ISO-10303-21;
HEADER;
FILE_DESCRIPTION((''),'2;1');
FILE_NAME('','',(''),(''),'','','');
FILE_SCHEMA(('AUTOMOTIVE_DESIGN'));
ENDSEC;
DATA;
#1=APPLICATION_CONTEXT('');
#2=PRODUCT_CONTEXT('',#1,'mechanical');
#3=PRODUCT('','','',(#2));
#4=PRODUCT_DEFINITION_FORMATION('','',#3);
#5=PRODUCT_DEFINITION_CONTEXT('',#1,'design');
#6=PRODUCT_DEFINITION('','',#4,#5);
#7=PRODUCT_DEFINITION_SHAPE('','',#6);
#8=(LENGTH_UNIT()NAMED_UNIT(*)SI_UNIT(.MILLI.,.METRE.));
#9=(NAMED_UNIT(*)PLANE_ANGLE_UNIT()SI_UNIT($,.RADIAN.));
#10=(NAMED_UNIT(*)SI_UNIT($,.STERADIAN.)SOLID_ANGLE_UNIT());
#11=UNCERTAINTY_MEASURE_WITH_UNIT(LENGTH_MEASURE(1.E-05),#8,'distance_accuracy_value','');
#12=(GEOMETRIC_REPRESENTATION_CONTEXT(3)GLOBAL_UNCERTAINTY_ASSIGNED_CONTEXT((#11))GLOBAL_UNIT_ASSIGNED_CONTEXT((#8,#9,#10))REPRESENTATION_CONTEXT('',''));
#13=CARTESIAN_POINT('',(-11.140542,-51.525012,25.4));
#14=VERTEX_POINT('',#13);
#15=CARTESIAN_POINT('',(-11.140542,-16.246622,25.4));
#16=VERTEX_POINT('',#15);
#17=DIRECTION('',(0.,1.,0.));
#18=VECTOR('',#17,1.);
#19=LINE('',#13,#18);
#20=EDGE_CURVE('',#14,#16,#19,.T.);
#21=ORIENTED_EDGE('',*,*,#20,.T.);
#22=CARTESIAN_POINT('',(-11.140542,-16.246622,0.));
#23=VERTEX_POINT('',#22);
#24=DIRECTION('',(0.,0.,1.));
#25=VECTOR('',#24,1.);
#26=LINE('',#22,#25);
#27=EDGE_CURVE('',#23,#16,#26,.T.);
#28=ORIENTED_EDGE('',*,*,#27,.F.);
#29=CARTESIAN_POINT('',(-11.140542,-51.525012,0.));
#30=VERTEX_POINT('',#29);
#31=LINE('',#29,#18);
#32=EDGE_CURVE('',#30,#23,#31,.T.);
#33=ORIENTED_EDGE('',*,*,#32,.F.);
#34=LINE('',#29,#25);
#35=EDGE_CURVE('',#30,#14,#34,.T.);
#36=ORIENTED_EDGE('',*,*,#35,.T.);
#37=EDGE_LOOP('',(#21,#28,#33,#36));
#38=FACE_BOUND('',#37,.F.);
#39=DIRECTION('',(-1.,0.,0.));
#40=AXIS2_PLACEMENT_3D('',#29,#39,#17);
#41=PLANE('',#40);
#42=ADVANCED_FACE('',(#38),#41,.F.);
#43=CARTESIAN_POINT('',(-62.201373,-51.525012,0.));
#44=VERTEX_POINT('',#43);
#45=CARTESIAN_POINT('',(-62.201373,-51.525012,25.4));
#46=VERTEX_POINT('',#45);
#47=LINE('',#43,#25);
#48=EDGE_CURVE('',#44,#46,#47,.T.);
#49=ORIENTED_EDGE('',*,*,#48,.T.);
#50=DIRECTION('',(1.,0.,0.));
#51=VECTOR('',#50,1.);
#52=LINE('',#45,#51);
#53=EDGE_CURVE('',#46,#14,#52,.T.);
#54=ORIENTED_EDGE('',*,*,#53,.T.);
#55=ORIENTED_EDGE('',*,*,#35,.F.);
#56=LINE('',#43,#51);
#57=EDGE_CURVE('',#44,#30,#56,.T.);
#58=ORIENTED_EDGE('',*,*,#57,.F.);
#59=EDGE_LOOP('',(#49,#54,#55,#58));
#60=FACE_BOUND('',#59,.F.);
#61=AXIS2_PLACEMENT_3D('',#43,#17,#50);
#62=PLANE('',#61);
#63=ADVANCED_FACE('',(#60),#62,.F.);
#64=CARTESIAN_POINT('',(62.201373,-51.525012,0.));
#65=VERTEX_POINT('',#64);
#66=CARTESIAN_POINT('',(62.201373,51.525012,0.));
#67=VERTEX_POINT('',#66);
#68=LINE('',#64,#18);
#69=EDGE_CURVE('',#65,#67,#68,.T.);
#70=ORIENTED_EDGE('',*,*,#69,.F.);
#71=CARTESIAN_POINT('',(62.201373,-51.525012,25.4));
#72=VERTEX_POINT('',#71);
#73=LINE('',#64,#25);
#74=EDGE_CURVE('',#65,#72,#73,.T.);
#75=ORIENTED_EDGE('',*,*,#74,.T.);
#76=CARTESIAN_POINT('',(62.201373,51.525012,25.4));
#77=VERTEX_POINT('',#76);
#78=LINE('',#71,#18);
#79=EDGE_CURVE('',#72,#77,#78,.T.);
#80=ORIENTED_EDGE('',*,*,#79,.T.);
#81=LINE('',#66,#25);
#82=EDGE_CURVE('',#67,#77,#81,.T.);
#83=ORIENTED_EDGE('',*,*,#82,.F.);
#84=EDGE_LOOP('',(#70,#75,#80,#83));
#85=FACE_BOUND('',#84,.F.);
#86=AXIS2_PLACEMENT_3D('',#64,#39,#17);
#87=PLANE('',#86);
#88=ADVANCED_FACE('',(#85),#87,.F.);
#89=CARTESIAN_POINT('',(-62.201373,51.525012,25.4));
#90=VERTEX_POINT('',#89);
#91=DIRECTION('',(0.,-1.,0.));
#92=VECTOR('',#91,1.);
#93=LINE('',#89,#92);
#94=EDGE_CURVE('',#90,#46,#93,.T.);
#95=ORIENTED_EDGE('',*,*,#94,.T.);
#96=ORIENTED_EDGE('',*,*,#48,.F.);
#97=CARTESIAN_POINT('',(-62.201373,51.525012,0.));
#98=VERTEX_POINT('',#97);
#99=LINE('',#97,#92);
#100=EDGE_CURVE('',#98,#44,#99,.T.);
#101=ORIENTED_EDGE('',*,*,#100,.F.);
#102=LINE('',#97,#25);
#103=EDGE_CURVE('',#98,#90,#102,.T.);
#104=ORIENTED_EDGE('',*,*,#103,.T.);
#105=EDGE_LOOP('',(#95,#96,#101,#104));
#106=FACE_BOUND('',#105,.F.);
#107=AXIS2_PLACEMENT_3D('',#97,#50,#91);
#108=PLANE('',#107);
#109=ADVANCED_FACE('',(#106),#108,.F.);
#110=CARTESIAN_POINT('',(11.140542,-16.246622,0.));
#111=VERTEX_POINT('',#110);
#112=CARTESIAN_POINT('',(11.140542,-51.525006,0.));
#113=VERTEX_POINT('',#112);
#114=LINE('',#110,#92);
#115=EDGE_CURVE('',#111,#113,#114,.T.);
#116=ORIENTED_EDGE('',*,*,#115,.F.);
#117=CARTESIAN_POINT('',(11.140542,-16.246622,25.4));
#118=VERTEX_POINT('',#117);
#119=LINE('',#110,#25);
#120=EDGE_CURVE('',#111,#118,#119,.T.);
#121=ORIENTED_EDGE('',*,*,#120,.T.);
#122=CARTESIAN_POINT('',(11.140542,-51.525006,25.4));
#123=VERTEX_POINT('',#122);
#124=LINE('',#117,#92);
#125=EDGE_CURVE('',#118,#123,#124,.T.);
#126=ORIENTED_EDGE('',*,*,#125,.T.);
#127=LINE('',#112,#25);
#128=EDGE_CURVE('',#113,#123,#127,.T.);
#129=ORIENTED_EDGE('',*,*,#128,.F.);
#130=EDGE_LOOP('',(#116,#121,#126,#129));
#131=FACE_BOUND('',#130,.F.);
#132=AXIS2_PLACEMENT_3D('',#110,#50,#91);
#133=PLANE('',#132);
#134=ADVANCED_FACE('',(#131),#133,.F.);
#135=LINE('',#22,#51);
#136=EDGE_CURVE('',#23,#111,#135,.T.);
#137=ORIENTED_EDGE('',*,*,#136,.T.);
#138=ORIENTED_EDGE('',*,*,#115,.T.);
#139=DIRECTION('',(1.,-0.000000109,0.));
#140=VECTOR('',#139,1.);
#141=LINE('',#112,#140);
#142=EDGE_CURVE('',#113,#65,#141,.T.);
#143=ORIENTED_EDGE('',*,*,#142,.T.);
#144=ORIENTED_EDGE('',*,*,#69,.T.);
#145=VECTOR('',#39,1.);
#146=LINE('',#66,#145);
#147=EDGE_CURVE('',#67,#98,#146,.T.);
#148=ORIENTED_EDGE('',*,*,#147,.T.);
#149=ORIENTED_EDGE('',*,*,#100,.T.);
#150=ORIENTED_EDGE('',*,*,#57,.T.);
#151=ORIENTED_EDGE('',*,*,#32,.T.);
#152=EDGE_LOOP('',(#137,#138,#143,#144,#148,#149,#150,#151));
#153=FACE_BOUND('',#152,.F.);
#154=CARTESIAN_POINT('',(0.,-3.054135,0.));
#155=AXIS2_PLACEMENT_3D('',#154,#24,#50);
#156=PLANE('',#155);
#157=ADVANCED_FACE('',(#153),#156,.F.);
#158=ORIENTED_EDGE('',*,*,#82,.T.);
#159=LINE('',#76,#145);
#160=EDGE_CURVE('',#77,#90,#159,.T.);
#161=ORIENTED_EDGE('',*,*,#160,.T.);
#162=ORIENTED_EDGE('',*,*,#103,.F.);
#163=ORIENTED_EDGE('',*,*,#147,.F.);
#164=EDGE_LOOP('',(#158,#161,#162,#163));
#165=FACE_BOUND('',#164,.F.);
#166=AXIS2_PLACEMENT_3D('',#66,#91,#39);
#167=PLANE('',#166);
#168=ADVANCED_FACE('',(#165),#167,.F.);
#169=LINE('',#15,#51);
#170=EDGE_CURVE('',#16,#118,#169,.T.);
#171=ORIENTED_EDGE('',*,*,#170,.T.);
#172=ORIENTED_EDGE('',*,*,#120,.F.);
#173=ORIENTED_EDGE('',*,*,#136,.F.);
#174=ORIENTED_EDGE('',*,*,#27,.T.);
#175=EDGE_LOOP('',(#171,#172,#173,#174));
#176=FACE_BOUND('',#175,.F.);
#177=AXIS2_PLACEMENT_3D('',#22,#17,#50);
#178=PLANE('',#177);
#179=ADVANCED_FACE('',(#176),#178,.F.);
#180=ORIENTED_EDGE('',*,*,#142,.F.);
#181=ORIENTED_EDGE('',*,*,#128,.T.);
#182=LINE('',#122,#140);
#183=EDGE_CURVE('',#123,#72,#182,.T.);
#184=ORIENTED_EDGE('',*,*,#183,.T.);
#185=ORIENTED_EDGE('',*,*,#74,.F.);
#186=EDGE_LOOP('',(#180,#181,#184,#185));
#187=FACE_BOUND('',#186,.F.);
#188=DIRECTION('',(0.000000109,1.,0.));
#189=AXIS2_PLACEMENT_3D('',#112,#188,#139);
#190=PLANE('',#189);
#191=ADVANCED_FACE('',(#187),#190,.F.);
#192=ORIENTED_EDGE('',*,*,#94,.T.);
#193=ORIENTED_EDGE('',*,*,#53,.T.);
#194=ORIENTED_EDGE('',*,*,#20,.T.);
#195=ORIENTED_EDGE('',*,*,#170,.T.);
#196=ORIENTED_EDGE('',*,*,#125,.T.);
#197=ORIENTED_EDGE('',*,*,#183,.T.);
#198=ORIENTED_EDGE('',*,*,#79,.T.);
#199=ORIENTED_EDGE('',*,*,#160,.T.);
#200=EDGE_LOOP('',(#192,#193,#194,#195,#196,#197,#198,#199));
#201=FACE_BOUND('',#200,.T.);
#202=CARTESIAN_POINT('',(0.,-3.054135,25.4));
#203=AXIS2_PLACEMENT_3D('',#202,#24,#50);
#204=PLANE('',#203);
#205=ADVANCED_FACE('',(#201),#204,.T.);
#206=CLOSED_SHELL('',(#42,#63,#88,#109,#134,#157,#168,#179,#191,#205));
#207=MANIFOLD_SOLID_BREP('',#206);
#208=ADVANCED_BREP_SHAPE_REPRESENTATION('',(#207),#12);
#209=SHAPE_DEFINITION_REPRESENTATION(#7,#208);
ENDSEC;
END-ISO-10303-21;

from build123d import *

# Parameters (mm, degrees)
F1_DEPTH = 25.4


# Not quite as in the source:
# - ends of sketch curves that miss each other by under 0.0002 mm in the source are joined


with BuildPart() as f1:
    # F0 (on Top) → F1 (new body)
    with BuildSketch(Plane.XY):
        Polygon((62.2013732791, -51.5250116587), (62.2013732791, 51.5250116587), (-62.2013732791, 51.5250116587), (-62.2013732791, -51.5250116587), (-11.1405421048, -51.5250116587), (-11.1405421048, -16.2466224283), (11.1405421048, -16.2466224283), (11.1405421048, -51.5250060707), align=None)
    extrude(amount=F1_DEPTH)


solid = f1.part
